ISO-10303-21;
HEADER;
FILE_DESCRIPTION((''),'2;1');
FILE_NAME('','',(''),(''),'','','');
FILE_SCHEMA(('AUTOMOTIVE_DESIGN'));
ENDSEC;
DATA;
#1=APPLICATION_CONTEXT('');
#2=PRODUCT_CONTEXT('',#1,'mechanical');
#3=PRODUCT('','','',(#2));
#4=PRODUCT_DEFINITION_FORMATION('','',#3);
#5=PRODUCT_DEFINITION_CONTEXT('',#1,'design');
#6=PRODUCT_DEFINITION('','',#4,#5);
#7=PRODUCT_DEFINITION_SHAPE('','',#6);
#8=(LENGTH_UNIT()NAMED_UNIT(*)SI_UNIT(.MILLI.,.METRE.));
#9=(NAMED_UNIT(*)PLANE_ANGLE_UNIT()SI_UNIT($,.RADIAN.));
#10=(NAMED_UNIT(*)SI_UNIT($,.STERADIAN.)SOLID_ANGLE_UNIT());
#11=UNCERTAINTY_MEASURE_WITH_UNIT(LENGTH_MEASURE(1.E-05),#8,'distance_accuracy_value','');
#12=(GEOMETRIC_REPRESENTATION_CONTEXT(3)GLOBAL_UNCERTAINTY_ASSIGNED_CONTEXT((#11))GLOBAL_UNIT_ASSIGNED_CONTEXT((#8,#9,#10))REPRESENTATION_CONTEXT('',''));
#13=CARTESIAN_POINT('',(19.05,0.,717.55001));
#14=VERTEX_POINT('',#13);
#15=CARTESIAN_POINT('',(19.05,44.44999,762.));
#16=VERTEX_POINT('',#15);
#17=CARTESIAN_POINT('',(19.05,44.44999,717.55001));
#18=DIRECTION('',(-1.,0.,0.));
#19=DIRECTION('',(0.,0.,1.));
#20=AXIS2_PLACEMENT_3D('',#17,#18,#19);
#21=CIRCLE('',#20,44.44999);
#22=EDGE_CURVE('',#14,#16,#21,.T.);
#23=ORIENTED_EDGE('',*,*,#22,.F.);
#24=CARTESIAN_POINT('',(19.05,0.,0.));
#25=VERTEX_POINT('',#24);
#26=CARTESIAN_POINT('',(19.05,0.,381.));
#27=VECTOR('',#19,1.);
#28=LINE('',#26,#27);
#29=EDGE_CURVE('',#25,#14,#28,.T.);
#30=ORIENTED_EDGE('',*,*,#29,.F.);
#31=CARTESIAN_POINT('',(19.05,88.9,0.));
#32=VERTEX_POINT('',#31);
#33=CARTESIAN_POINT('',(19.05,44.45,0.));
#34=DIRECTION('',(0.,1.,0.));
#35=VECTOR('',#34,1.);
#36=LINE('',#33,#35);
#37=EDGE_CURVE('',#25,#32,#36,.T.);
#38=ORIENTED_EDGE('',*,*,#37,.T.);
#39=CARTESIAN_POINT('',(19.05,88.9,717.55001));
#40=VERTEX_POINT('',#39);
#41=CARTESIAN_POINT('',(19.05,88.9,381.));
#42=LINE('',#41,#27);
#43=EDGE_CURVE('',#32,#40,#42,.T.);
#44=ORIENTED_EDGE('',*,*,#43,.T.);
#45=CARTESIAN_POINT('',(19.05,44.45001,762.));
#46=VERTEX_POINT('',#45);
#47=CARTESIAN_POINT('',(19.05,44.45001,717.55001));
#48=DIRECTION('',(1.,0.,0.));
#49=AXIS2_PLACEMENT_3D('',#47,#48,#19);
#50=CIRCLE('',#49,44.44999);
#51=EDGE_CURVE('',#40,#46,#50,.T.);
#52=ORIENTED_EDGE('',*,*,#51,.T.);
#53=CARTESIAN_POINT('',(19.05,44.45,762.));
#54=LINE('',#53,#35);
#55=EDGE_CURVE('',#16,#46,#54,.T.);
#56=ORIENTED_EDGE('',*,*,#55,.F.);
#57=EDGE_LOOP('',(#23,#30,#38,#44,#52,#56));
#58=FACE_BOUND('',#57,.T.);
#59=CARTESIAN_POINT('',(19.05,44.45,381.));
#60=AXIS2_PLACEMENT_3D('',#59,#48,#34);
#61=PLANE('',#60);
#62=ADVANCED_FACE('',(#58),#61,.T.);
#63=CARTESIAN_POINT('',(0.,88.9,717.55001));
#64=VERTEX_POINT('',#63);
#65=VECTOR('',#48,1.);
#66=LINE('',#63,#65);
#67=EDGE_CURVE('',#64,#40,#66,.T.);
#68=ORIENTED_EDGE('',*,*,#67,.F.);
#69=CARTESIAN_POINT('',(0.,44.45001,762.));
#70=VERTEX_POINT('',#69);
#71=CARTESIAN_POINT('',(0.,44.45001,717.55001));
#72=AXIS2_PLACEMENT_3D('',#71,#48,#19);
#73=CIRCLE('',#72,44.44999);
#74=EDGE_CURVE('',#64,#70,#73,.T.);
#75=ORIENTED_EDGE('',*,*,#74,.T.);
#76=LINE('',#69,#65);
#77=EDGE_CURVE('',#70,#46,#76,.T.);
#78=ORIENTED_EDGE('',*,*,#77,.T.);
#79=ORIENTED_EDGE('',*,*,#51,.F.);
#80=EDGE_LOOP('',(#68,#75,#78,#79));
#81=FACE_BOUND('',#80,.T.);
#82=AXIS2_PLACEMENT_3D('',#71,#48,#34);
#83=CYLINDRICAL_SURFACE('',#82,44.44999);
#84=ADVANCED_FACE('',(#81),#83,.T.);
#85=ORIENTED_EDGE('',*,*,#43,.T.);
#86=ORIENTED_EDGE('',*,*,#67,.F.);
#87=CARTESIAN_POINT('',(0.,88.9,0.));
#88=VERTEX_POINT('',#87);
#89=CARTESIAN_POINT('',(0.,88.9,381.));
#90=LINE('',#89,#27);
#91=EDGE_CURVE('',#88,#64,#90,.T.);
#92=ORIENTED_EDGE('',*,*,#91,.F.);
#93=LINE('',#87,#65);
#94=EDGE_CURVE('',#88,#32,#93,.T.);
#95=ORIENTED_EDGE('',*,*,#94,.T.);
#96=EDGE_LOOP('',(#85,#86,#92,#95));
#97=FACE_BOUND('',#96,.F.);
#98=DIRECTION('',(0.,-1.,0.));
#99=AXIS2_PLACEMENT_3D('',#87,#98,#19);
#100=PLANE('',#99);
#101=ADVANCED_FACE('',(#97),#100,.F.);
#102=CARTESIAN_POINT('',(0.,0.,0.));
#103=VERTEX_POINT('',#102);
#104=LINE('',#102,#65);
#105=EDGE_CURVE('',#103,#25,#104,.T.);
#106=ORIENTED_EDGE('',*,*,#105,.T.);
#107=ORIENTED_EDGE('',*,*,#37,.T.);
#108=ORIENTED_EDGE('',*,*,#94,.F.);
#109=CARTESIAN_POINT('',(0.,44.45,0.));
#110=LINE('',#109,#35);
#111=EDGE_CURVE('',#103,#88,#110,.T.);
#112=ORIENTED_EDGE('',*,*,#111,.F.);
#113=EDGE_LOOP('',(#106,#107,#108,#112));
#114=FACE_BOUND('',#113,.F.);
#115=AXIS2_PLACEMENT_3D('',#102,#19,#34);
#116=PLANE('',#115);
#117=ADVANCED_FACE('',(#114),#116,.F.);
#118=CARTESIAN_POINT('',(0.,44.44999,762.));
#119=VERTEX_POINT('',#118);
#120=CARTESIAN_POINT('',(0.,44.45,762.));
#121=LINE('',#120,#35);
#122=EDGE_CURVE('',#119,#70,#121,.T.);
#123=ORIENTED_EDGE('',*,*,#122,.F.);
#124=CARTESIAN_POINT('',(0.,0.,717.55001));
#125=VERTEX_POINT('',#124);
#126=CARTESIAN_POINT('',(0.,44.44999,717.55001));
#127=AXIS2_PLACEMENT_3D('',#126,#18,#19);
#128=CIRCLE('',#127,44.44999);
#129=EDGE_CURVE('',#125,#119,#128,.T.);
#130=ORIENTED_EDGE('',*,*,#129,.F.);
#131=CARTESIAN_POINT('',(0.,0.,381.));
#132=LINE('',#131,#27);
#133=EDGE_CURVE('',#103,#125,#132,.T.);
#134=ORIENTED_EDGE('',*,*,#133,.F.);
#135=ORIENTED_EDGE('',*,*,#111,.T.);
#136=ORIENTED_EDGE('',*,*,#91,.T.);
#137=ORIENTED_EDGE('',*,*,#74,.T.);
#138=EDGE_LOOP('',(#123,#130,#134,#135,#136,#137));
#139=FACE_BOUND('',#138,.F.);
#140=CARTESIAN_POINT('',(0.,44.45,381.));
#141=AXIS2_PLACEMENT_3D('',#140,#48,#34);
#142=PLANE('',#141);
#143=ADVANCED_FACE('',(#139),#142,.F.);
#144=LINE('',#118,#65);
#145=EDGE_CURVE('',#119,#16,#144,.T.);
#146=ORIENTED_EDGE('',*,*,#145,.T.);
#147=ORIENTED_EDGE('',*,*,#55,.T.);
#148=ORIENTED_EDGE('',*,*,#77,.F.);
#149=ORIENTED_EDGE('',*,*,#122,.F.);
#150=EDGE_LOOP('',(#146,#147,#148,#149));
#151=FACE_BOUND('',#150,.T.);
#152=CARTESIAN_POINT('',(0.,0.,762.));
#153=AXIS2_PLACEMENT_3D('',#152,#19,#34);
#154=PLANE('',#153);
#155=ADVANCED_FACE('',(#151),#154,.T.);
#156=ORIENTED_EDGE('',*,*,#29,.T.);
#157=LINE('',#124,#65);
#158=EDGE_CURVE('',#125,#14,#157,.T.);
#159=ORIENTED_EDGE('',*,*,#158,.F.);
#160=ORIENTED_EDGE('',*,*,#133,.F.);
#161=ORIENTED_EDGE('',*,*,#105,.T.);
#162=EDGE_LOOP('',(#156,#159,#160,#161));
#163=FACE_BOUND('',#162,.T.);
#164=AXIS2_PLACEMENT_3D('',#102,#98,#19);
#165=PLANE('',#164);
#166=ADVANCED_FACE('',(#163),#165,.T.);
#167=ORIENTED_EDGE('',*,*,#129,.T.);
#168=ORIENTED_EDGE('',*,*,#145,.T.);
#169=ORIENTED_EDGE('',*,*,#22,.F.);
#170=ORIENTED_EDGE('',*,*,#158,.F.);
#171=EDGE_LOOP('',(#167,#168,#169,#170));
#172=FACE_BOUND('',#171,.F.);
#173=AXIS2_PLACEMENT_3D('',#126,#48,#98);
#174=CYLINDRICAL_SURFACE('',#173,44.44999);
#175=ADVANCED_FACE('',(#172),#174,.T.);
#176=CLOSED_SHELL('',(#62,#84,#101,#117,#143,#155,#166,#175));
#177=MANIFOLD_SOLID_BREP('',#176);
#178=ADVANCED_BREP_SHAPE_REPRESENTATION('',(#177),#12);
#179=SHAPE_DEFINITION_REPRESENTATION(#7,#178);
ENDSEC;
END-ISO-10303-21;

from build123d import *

# Parameters (mm, degrees)
F0_W     = 88.9
F0_H     = 762
F1_DEPTH = 19.05
F2_R     = 44.44999


# Not quite as in the source:
# - a fillet or chamfer is up to 0.001 mm smaller than in the source, because OpenCascade refuses the exact size


with BuildPart() as f1:
    # F0 (on Right) → F1 (new body)
    with BuildSketch(Plane.YZ):
        with Locations((44.45, 381)):
            Rectangle(F0_W, F0_H)
    extrude(amount=F1_DEPTH)

    # F2 (radius 44.45 in the source; OpenCascade refuses exactly that, so slightly less here)
    f2_edges = [f1.edges().sort_by_distance(p)[0] for p in [
        (9.525, 0, 762),
        (9.525, 88.9, 762),
    ]]
    fillet(f2_edges, radius=F2_R)


solid = f1.part
